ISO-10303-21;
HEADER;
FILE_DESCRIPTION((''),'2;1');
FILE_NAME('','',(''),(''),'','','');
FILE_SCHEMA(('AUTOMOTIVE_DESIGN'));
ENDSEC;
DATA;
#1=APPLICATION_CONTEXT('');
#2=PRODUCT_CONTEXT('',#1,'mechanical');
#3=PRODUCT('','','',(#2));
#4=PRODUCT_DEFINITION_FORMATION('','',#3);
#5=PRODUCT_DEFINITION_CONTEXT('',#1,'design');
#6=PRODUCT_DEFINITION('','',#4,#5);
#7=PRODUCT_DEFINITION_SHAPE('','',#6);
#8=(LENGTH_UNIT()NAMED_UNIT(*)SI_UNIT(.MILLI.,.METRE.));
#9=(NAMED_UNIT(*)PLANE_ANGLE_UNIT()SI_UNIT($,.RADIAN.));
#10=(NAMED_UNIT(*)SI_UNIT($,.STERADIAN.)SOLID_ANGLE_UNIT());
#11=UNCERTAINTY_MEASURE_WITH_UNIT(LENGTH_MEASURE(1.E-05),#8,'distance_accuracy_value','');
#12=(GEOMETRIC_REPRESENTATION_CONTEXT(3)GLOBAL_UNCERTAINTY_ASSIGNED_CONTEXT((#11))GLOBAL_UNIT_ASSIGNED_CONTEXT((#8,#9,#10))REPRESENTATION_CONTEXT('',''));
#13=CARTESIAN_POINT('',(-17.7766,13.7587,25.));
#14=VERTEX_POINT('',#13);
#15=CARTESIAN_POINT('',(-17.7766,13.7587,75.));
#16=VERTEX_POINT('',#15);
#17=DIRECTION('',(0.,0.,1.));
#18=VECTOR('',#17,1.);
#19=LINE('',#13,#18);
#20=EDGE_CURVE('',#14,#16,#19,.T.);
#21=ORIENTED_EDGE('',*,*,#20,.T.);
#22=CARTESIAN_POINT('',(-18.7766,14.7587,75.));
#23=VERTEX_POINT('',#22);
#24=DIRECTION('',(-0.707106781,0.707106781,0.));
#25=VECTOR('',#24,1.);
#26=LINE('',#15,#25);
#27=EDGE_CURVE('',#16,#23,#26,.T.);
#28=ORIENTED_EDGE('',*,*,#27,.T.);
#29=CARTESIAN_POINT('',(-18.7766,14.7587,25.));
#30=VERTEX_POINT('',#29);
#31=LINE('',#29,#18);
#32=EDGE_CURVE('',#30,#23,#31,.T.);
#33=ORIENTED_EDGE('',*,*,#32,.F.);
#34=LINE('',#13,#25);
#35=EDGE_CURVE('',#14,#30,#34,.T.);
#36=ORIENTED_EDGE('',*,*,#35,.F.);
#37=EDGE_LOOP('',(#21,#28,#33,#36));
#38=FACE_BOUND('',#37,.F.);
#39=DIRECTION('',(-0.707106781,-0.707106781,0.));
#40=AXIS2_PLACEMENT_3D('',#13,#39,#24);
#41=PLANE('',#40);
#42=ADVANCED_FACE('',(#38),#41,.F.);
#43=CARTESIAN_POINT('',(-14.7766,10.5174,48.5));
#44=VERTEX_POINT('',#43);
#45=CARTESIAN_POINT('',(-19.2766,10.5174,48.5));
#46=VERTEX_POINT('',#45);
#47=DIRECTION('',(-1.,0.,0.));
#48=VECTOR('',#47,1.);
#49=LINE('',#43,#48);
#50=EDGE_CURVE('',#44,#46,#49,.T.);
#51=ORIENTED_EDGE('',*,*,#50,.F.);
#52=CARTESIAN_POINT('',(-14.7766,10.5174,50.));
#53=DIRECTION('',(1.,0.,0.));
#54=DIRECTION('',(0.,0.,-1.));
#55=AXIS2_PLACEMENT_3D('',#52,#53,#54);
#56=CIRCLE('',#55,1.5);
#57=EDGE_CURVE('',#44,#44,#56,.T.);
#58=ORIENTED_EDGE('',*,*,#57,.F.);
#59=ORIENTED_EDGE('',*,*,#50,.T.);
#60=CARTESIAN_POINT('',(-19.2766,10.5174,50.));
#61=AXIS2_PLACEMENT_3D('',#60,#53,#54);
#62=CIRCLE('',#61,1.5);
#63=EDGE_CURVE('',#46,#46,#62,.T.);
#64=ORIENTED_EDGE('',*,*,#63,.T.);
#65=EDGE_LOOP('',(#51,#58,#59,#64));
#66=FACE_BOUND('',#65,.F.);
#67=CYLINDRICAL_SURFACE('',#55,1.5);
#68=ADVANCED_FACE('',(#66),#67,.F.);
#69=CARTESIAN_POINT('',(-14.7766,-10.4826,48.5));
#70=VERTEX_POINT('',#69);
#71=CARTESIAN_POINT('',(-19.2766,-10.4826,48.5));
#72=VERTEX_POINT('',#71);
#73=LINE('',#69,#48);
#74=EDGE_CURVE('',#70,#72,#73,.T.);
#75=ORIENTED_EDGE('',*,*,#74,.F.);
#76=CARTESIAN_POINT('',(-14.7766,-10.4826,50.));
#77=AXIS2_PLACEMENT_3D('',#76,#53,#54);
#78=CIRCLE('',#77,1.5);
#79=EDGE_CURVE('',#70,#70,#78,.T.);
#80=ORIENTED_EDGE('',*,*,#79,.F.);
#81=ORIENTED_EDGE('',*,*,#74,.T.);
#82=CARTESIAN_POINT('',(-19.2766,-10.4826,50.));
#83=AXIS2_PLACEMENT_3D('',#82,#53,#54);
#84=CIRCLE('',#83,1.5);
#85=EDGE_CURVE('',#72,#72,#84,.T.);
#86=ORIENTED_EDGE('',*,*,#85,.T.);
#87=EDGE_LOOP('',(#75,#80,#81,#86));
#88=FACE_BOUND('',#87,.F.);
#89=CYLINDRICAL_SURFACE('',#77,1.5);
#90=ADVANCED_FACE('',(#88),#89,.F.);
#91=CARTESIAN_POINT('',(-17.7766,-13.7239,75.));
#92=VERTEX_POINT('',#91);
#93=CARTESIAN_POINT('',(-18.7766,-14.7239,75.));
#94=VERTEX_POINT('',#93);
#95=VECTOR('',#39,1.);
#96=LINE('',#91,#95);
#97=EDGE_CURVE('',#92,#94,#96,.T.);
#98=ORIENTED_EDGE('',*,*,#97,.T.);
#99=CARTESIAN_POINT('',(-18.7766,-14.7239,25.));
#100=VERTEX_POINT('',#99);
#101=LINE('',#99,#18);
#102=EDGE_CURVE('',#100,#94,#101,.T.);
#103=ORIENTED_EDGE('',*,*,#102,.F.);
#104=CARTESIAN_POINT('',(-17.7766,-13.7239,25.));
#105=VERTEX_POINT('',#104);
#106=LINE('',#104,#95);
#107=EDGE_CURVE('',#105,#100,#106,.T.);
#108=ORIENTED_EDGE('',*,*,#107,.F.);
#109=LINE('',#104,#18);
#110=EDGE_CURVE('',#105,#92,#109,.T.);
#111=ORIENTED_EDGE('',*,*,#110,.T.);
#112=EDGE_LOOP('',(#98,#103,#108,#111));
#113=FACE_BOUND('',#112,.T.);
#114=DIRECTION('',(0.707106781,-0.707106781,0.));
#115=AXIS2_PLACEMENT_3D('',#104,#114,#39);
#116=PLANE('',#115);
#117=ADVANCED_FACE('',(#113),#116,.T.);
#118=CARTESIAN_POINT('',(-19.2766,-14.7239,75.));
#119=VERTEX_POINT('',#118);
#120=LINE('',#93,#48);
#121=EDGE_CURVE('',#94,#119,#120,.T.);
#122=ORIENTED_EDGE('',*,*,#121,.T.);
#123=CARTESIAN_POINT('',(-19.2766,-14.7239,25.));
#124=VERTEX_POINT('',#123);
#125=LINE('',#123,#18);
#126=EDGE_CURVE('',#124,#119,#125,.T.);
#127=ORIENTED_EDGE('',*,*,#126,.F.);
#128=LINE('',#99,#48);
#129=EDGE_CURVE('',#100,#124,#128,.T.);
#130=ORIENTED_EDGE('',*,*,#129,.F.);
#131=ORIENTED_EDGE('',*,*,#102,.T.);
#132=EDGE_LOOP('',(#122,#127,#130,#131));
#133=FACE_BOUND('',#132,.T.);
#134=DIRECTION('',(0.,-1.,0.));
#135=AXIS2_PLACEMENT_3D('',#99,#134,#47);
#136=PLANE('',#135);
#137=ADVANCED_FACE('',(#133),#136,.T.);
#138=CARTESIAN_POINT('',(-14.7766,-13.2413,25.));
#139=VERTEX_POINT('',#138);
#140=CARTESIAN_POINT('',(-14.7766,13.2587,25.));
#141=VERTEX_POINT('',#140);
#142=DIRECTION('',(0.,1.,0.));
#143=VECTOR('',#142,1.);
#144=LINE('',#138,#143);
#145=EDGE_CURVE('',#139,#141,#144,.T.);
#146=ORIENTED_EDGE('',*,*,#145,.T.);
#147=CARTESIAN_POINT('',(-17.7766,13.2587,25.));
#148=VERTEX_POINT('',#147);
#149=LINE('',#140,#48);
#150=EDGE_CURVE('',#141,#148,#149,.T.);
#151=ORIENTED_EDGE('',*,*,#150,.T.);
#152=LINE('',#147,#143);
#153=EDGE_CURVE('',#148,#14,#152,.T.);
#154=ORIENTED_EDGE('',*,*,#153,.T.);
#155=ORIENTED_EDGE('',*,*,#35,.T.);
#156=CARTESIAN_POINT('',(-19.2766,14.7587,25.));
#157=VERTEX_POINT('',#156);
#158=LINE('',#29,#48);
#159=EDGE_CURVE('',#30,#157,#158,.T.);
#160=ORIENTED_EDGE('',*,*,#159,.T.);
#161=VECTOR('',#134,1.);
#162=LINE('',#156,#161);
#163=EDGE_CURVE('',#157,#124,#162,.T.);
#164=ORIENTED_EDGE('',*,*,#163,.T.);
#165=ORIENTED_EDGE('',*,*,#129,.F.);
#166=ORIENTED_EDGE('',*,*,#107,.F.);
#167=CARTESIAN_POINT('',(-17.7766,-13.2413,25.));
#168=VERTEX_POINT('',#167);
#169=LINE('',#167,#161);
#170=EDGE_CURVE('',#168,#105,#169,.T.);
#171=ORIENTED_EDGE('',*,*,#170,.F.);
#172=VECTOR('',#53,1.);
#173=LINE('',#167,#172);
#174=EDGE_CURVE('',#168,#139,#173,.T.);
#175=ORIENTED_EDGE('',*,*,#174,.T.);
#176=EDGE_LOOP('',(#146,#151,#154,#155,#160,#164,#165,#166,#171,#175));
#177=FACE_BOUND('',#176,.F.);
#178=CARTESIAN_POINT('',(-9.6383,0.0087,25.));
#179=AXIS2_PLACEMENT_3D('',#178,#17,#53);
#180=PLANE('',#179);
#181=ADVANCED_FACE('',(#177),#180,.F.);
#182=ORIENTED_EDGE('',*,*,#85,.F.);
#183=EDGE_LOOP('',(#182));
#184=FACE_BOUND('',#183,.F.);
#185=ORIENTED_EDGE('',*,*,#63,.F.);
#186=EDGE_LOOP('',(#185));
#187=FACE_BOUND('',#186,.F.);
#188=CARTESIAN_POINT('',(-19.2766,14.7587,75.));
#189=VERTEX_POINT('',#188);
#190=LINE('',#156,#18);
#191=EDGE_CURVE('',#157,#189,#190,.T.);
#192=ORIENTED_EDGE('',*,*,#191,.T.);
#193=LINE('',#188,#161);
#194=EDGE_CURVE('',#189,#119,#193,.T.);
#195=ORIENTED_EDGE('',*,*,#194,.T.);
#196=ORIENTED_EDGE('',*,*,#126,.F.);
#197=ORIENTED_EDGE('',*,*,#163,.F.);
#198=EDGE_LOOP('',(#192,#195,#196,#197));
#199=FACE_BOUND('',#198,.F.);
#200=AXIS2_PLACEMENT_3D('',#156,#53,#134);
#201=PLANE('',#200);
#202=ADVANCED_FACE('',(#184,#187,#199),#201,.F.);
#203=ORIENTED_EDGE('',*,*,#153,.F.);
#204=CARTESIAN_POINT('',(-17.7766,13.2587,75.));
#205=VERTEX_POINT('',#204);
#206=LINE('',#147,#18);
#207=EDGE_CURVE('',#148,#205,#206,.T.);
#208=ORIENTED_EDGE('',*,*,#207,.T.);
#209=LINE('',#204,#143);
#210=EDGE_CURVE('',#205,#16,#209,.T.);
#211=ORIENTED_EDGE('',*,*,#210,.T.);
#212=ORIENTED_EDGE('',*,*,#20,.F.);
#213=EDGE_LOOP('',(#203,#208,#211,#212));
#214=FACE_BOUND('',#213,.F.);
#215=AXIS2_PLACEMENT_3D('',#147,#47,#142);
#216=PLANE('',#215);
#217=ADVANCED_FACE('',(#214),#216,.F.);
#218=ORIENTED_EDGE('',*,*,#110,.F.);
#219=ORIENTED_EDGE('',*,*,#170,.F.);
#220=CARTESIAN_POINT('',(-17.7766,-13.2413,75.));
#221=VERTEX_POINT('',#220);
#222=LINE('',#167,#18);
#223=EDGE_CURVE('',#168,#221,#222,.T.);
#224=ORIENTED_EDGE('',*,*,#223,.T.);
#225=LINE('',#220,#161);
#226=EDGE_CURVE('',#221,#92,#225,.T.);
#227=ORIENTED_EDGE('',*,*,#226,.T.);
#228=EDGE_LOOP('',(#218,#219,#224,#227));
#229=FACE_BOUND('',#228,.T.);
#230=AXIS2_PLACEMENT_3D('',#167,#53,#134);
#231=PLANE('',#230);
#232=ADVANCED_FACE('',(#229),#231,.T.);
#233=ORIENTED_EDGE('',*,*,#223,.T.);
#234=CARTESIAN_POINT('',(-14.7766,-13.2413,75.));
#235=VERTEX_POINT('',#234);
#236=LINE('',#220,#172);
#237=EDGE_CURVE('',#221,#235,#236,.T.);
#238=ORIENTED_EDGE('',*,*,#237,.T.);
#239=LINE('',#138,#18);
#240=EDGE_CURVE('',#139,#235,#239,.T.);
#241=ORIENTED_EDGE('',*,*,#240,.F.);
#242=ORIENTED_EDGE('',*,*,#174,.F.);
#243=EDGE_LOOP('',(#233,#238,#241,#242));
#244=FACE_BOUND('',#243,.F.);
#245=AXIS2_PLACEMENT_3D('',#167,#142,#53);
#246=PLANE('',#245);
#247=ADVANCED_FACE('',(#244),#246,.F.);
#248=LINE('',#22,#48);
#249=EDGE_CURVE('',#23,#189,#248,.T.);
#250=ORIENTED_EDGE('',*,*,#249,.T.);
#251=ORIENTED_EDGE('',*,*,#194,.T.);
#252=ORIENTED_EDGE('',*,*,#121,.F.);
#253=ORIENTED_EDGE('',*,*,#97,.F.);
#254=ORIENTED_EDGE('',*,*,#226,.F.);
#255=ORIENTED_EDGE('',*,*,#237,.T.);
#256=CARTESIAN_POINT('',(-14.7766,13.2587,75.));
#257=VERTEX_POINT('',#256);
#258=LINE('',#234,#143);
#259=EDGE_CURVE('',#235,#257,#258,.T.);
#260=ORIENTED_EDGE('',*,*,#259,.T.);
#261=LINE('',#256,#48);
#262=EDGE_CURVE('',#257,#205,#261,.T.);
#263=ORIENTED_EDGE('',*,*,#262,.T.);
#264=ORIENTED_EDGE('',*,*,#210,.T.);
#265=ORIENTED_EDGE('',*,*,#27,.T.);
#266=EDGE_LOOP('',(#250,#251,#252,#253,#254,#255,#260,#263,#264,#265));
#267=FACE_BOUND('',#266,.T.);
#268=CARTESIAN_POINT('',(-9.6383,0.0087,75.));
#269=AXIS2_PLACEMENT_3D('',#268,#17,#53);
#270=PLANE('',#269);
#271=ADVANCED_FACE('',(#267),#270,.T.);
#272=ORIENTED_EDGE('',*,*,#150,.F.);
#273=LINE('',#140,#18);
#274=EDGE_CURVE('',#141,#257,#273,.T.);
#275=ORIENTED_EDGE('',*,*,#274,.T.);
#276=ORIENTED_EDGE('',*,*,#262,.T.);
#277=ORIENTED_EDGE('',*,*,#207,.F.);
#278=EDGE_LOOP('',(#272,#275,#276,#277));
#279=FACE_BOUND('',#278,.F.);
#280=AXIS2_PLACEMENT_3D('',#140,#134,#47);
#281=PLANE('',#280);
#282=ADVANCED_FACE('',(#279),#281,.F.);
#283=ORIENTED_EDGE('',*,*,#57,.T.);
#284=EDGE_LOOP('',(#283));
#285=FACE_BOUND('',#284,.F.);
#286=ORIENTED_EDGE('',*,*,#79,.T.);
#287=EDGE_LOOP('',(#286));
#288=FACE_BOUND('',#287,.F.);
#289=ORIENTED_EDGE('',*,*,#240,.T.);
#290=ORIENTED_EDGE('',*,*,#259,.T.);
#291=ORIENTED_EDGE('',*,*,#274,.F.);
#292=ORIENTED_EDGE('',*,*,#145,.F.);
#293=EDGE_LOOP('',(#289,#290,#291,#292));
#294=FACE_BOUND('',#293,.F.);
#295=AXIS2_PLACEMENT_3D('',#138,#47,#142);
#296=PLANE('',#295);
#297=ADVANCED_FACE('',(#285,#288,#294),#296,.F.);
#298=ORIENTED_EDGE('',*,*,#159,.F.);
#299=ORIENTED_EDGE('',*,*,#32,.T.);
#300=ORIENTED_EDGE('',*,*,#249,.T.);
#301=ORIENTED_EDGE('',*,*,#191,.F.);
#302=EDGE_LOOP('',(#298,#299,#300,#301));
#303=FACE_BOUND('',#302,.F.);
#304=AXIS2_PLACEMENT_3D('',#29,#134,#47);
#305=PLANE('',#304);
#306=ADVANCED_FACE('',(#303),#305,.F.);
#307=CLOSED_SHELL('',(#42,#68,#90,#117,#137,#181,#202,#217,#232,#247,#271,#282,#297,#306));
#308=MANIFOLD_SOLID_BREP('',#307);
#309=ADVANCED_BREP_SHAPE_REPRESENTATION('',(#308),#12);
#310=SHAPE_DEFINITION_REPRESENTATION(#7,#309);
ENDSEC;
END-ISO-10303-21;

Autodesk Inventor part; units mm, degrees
ref_plane "YZ Plane" through (0, 0, 0) normal (1, 0, 0) x (0, 1, 0)
ref_plane "XZ Plane" through (0, 0, 0) normal (0, 1, 0) x (-1, 0, 0)
ref_plane "XY Plane" through (0, 0, 0) normal (0, 0, 1) x (1, 0, 0)
sketch "Sketch1" plane through (0, 0, 0) normal (0, 0, 1) x (1, 0, 0)
  line L0 (-19.2766, 29.5) -> (-19.2766, -29.4652) projected
  line L1 (-18.2766, -29.4652) -> (-19.2766, -29.4652) projected
  line L2 (-16.2766, -27.4652) -> (-18.2766, -29.4652) projected
  line L3 (-16.2766, -26.5) -> (-16.2766, -27.4652) projected
  line L4 (-16.2766, -26.5) -> (28.7234, -26.5) construction
  arc A0 (28.7234, -26.5) -> (30.7234, -24.5) centre (28.7234, -24.5) ccw projected
  line L5 (30.7234, -24.5) -> (30.7234, -19.5) projected
  line L6 (30.7234, -19.5) -> (27.7234, -22.5) projected
  line L7 (27.7234, -22.5) -> (-14.2766, -22.5) construction
  arc A1 (-16.2766, -20.5) -> (-14.2766, -22.5) centre (-14.2766, -20.5) ccw construction
  line L8 (-16.2766, -20.5) -> (-16.2766, 20.5) construction
  arc A2 (-14.2766, 22.5) -> (-16.2766, 20.5) centre (-14.2766, 20.5) ccw construction
  line L9 (-14.2766, 22.5) -> (27.7234, 22.5) construction
  line L10 (27.7234, 22.5) -> (30.7234, 19.5) projected
  line L11 (30.7234, 19.5) -> (30.7234, 24.5) projected
  arc A3 (30.7234, 24.5) -> (28.7234, 26.5) centre (28.7234, 24.5) ccw projected
  line L12 (28.7234, 26.5) -> (-16.2766, 26.5) construction
  line L13 (-16.2766, 26.5) -> (-16.2766, 27.5) projected
  line L14 (-16.2766, 27.5) -> (-18.2766, 29.5) projected
  line L15 (-18.2766, 29.5) -> (-19.2766, 29.5) projected
  line L16 (-16.2766, -26.5) -> (-10.2766, -26.5)
  line L17 (-10.2766, -26.5) -> (-10.2766, 26.5)
  line L18 (-10.2766, 26.5) -> (-16.2766, 26.5)
  line L19 (-10.2766, 26.5) -> (-16.2766, 26.5)
  line L20 (-19.2766, -29.4652) -> (-19.2766, 29.5)
  line L21 (-18.2766, 29.5) -> (-19.2766, 29.5)
  line L22 (-18.2766, 29.5) -> (-16.2766, 27.5)
  line L23 (-16.2766, 27.5) -> (-16.2766, 26.5)
  line L24 (-19.2766, -29.4652) -> (-18.2766, -29.4652)
  line L25 (-18.2766, -29.4652) -> (-16.2766, -27.4652)
  line L26 (-16.2766, -27.4652) -> (-16.2766, -26.5)
  point P0 (0, 0)
  dimension "d0" = 6
extrude "Extrusion1" add sketch "Sketch1" along normal blind 100
sketch "Sketch2" plane through (-10.2766, -26.5, 0) normal (1, 0, 0) x (0, 0, -1)
  line L0 (0, -2.9652) -> (0, -0.9652) projected
  line L1 (-100, 56) -> (-100, -2.9652) projected
  line L2 (0, -2.9652) -> (-100, -2.9652) projected
  line L3 (-100, 56) -> (-100, -2.9652)
  line L4 (0, 56) -> (0, -2.9652) projected
  line L5 (0, 56) -> (-100, 56) projected
  circle A0 centre (-50, 5.5174) radius 3
  circle A1 centre (-50, 47.5174) radius 3
  point P0 (0, 26.5)
  dimension "d5" = 6
  dimension "d6" = 6
extrude "Extrusion2" cut sketch "Sketch2" against normal blind 100 contours A0 | A1
scale "Scale1" factors (0.5, 0.5, 0.5) then translate (-9.6383, 0.0087, 25) bodies 1
properties part number "batteryholder9"
